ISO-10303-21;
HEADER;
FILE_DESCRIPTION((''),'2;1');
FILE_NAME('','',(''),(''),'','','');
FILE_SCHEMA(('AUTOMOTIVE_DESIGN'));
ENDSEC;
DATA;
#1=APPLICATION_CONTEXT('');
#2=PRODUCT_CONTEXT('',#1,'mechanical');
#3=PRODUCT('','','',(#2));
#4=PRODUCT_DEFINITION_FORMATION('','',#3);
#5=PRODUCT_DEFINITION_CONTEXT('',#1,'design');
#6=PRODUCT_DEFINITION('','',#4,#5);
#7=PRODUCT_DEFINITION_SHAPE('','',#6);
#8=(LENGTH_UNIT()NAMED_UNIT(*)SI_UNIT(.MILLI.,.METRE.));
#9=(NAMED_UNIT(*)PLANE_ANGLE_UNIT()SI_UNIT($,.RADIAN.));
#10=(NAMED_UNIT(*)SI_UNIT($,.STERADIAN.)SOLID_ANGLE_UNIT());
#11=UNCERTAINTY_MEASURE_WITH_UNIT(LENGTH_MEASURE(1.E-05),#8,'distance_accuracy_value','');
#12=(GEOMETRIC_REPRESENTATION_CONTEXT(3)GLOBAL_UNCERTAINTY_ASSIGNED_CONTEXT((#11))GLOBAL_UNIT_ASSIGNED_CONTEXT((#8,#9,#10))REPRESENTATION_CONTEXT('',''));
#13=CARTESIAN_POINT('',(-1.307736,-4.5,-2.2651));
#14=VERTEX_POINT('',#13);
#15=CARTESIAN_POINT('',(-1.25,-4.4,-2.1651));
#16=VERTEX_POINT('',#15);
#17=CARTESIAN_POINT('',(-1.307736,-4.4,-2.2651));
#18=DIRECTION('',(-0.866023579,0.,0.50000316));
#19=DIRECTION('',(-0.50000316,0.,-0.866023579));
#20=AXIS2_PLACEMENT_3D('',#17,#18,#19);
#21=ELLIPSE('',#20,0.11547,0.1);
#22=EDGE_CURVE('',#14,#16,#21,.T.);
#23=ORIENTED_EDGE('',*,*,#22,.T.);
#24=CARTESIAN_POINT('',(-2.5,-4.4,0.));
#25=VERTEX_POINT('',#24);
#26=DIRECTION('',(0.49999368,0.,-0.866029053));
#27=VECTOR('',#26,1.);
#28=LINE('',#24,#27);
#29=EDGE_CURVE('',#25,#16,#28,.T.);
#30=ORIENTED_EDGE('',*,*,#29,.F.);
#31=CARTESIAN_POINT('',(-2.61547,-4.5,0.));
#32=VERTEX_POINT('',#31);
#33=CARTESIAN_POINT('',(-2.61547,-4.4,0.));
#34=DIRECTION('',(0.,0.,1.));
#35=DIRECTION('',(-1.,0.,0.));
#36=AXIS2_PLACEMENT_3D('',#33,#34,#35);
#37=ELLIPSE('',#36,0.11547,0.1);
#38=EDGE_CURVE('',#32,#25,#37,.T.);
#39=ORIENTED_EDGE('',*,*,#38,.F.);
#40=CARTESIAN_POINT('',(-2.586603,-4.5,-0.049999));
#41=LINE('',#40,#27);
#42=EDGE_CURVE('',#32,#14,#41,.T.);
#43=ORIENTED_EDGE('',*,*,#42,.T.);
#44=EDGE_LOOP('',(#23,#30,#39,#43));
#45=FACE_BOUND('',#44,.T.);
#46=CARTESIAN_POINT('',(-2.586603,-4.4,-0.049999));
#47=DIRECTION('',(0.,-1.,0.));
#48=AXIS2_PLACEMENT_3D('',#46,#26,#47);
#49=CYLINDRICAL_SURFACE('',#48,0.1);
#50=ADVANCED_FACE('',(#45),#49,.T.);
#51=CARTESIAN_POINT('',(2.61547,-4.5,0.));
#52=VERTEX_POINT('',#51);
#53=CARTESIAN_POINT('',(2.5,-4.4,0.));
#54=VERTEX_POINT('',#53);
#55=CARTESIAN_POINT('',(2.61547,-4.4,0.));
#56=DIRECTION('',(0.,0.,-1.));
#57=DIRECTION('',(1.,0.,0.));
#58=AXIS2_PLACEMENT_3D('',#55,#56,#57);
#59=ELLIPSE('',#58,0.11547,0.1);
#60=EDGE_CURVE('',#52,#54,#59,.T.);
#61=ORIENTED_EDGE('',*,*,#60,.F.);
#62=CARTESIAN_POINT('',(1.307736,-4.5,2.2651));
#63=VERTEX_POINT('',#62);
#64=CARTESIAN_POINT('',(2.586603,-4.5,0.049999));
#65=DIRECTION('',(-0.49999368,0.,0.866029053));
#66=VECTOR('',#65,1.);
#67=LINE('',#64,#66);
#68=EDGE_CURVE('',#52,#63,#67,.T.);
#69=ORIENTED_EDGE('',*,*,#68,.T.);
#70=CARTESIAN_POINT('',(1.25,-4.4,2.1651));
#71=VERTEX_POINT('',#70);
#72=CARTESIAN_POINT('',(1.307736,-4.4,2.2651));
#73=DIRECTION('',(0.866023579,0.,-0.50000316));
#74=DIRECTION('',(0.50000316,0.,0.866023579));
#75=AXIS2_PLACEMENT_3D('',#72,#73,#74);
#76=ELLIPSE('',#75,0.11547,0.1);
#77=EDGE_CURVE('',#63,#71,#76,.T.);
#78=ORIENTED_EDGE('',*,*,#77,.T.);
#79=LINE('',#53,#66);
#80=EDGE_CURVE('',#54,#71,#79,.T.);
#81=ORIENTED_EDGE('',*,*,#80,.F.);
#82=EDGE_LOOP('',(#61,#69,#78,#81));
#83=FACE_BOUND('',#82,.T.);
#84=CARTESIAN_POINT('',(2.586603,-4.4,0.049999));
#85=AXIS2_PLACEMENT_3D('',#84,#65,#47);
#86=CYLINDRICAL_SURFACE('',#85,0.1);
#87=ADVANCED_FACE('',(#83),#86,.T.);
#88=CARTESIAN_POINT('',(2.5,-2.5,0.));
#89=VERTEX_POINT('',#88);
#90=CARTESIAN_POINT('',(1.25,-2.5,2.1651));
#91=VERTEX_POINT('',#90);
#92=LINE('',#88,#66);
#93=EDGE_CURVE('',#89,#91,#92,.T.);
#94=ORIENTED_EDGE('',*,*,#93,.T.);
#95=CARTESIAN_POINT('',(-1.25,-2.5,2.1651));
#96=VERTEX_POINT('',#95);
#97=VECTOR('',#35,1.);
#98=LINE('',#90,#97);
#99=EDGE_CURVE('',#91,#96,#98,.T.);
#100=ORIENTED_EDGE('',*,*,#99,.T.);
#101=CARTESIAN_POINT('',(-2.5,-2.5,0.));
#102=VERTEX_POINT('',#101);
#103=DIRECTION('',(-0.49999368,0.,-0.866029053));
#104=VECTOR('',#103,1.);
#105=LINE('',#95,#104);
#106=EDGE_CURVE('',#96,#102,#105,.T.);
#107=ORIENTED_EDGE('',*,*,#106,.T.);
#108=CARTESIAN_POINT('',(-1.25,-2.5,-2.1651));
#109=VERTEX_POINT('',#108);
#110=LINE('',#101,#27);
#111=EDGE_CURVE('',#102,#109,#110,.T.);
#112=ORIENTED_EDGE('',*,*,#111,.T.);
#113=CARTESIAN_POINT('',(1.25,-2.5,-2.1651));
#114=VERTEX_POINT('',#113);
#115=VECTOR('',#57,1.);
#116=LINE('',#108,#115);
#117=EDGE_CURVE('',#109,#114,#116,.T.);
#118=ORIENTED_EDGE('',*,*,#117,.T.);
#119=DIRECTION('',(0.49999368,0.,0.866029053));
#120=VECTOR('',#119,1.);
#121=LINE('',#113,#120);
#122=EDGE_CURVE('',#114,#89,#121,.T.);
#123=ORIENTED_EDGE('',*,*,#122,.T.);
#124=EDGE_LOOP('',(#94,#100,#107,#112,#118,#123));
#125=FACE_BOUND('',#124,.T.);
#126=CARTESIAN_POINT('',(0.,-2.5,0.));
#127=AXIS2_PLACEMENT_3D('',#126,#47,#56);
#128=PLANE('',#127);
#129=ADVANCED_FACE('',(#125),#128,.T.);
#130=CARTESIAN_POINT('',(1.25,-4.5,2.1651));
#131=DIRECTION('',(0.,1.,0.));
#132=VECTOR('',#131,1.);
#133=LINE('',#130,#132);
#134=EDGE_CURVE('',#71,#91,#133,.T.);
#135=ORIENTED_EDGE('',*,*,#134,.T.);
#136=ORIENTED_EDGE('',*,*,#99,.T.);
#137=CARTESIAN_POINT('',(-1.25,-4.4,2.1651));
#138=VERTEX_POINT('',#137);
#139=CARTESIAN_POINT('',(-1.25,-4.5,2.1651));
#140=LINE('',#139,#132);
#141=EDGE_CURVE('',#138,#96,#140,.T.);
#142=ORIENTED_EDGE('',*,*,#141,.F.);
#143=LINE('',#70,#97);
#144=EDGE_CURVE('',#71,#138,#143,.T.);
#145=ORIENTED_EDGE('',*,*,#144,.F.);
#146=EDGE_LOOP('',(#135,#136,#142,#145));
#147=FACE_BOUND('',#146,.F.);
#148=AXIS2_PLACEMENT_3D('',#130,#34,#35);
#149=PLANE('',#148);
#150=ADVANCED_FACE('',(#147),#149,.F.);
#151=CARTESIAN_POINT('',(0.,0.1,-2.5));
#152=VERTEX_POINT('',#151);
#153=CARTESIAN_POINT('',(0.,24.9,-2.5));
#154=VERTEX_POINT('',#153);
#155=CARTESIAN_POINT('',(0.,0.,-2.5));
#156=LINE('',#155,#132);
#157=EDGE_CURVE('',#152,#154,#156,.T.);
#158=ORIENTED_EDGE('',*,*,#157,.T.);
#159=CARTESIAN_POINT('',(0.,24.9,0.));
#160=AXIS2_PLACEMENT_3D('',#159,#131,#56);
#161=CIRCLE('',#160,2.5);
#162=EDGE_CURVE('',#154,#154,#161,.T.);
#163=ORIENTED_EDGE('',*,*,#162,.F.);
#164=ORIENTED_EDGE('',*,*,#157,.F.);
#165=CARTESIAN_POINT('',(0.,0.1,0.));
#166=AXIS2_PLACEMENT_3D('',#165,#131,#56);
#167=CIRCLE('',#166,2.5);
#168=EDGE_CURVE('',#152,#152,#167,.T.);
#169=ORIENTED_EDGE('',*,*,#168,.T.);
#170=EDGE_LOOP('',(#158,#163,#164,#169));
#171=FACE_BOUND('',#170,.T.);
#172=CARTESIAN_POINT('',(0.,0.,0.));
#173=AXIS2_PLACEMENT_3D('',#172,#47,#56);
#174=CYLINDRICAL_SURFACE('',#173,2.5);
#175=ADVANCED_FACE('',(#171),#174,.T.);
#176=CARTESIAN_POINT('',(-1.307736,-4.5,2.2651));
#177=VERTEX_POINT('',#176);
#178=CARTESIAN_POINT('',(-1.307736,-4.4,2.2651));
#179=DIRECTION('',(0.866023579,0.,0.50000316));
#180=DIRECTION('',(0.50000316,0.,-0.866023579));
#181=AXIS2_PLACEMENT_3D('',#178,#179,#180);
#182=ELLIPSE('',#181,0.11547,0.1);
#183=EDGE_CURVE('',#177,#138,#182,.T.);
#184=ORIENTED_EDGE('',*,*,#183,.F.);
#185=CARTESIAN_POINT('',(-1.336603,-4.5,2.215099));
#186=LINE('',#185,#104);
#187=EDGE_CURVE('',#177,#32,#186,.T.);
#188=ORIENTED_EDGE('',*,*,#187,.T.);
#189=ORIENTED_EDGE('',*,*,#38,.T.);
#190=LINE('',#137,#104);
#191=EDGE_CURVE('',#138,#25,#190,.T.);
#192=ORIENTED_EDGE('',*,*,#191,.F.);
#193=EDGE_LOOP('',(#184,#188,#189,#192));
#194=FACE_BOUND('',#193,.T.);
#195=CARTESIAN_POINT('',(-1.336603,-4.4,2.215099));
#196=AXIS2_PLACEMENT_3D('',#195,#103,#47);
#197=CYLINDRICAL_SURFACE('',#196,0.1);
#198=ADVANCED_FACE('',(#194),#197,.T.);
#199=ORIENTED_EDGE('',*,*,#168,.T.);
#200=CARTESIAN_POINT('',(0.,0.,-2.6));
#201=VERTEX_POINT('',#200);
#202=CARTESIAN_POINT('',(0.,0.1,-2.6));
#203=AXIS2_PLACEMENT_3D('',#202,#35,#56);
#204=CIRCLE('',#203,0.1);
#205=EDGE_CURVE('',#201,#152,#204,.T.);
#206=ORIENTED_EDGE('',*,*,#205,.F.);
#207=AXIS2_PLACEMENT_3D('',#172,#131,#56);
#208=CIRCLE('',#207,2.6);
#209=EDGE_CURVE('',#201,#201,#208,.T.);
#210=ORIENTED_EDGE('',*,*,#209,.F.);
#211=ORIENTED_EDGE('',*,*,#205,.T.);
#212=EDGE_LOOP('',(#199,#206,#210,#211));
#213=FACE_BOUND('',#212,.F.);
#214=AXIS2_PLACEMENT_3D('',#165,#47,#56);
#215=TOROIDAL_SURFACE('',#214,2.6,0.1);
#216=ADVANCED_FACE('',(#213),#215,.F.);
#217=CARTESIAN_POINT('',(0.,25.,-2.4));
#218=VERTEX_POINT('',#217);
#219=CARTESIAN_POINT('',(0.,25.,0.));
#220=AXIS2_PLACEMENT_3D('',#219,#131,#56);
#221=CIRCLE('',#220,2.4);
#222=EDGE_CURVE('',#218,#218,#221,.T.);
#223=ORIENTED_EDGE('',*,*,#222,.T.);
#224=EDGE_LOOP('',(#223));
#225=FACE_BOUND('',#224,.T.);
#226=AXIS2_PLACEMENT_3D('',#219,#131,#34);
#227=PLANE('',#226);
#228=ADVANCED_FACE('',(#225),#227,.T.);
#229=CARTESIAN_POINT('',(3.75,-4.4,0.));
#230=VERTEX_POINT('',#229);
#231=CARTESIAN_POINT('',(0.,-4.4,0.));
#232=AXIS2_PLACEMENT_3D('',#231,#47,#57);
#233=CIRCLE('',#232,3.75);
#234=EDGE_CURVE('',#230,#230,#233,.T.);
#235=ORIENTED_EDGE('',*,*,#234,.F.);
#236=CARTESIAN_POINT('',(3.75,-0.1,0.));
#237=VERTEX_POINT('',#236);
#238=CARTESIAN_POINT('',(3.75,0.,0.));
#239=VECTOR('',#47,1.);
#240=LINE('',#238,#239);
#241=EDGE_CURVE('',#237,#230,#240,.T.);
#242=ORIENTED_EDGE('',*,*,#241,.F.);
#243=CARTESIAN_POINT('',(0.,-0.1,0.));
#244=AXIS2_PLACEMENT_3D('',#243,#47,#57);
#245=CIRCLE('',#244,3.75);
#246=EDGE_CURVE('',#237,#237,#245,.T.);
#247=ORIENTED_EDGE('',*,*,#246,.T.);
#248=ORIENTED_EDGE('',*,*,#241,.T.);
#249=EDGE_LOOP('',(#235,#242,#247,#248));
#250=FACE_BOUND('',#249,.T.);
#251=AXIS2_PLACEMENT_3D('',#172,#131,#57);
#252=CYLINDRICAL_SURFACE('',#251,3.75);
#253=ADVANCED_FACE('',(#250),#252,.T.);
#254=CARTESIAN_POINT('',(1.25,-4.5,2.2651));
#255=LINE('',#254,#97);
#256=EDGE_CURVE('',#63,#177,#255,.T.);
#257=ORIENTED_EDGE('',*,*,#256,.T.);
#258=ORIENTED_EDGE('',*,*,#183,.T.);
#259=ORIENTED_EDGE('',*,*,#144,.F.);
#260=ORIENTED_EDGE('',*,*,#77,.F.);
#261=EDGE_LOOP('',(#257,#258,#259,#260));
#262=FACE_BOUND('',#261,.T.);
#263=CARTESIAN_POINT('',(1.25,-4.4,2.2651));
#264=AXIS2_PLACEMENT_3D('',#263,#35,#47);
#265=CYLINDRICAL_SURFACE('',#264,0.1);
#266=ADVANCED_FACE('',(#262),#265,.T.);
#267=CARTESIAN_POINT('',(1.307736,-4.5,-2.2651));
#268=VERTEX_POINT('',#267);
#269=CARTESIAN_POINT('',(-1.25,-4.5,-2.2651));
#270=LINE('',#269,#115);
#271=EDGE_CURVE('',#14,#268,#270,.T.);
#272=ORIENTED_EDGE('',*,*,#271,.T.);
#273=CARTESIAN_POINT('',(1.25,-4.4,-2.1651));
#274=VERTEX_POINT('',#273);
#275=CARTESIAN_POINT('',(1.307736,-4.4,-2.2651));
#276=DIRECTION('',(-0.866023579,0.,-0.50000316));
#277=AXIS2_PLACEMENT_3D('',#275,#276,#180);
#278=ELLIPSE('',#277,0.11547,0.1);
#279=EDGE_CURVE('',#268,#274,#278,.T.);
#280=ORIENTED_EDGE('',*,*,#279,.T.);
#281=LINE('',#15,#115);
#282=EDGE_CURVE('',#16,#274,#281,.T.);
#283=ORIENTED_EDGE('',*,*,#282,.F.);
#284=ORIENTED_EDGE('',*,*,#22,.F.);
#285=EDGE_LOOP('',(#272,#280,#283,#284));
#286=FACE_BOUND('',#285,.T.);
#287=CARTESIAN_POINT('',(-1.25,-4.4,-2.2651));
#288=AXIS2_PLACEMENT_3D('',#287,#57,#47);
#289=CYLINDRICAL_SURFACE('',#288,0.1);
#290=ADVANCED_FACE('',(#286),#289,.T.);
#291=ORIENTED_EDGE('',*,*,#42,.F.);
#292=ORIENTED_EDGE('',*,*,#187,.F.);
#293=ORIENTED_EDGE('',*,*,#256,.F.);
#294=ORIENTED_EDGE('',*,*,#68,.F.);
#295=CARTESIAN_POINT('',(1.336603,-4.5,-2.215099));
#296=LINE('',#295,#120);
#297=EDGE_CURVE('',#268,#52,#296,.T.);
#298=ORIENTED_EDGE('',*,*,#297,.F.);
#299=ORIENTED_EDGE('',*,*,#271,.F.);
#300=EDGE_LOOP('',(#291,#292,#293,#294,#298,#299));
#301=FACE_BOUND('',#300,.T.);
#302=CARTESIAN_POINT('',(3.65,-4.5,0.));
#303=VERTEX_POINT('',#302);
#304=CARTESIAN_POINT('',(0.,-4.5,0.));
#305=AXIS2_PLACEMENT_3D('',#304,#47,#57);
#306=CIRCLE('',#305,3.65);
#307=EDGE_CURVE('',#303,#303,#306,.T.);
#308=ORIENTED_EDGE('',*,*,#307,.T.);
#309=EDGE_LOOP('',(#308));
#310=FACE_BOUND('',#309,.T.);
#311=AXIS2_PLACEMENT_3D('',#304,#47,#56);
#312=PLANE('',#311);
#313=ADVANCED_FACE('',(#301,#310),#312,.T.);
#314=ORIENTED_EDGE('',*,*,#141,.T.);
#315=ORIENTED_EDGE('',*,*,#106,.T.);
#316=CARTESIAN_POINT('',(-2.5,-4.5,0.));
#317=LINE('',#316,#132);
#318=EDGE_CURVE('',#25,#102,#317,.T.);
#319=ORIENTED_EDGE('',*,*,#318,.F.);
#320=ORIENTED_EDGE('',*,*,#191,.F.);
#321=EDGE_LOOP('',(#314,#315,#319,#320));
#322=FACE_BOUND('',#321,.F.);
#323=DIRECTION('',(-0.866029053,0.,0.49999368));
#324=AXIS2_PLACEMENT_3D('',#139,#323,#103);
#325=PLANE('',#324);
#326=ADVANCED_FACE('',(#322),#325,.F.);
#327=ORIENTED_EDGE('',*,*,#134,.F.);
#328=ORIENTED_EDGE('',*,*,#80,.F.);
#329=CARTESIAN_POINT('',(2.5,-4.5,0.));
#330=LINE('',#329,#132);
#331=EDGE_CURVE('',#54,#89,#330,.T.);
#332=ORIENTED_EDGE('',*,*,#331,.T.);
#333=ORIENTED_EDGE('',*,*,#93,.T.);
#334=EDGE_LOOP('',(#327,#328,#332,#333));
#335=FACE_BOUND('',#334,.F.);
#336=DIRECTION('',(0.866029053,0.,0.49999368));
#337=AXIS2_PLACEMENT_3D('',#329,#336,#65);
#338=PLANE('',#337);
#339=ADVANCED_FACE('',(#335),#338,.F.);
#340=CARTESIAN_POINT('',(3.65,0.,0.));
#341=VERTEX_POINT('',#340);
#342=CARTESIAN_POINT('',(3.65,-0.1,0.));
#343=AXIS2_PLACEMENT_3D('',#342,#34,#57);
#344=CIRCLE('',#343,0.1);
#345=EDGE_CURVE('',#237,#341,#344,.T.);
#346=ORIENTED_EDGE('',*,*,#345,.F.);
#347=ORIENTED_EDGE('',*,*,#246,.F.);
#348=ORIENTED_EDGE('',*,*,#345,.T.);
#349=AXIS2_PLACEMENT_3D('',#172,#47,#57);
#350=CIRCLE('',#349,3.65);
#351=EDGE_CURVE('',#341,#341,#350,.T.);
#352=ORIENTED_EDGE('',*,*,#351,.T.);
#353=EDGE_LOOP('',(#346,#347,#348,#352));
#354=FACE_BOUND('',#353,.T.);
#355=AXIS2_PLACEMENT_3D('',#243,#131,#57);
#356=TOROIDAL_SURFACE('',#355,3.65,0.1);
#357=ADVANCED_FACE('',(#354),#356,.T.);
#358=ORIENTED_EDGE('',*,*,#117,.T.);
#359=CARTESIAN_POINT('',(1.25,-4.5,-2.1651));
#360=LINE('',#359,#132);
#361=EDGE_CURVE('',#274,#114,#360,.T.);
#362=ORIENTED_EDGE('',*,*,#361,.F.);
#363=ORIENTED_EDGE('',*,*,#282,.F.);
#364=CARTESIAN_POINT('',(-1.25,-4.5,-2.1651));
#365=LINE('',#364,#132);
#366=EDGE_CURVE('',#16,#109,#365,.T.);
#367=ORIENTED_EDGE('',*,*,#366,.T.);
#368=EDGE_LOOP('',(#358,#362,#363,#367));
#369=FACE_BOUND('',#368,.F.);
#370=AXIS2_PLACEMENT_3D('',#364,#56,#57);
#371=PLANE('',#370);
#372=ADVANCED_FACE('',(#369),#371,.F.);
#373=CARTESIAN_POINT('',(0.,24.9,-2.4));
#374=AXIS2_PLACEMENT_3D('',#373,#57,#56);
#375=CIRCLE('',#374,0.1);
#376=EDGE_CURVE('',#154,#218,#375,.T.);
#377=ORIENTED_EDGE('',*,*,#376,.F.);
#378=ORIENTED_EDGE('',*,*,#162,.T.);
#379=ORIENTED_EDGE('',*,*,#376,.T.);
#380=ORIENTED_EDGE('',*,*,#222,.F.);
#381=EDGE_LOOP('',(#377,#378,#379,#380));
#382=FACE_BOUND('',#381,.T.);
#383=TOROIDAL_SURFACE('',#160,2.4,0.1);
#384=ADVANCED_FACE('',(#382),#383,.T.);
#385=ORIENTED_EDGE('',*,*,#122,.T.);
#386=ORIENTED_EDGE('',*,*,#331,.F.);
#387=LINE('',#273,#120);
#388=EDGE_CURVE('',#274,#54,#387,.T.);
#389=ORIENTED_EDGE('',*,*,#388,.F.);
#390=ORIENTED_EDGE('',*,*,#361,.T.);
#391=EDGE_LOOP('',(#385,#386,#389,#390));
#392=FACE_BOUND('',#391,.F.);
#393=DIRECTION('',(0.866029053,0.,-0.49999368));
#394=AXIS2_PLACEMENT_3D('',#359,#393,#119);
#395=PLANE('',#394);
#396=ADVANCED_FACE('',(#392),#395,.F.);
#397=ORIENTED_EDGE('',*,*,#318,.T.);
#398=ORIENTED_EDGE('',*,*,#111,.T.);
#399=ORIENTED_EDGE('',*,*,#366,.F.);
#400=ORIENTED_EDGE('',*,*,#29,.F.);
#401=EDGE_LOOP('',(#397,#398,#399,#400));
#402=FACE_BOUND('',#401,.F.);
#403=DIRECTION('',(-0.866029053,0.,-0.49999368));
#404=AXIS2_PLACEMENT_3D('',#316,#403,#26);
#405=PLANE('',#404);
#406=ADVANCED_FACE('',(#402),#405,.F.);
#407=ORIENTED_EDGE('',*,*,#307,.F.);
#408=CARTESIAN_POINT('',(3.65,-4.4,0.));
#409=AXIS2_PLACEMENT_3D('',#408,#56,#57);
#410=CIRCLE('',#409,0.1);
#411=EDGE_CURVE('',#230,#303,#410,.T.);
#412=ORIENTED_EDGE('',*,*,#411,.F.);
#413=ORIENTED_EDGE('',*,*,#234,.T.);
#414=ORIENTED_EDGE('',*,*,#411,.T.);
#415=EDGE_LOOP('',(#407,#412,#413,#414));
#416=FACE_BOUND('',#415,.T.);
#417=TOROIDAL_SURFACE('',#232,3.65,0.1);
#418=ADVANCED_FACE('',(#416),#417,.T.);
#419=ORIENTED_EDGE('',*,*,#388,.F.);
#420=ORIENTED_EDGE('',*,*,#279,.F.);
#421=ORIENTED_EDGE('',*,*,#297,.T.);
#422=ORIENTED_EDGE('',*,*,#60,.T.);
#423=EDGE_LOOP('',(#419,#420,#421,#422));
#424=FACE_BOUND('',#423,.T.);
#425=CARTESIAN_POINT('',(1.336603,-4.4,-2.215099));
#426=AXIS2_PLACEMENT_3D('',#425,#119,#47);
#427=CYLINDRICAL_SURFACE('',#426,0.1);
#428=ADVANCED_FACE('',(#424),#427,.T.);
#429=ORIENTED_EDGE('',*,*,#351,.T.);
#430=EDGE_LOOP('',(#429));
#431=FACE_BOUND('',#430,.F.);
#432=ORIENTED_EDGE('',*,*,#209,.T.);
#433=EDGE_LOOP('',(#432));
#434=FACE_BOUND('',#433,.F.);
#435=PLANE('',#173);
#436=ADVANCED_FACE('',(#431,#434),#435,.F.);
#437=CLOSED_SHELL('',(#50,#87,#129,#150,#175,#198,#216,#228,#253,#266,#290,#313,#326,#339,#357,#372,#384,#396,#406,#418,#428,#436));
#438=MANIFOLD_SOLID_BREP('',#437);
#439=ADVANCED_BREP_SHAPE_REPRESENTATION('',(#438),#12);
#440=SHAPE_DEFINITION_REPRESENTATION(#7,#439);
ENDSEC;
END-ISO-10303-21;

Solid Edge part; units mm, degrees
sketch "Sketch1" plane through (0, 0, 0) normal (0, -1, 0) x (1, 0, 0)
  circle A0 centre (0, 0) radius 3.75
extrude "Protrusion1" add sketch "Sketch1" along normal blind 4.5
sketch "Sketch2" plane through (0, 0, 0) normal (0, 1, 0) x (0, 0, -1)
  circle A0 centre (0, 0) radius 2.5
extrude "ExtrudedProtrusion_2" add sketch "Sketch2" along normal blind 25
sketch "Sketch3" plane through (0, -4.5, 0) normal (0, -1, 0) x (0, 0, 1)
  line L0 (-2.1651, 1.25) -> (-2.1651, -1.25)
  line L1 (-2.1651, -1.25) -> (0, -2.5)
  line L2 (0, -2.5) -> (2.1651, -1.25)
  line L3 (2.1651, -1.25) -> (2.1651, 1.25)
  line L4 (2.1651, 1.25) -> (0, 2.5)
  line L5 (0, 2.5) -> (-2.1651, 1.25)
extrude "ExtrudedCutout_1" cut sketch "Sketch3" against normal blind 2
fillet "Round_1" radius 0.1 10 edges at (-1.875, -4.5, 1.0825) (-1.875, -4.5, -1.0825) (0, -4.5, -2.1651) (1.875, -4.5, -1.0825) (1.875, -4.5, 1.0825) (0, -4.5, 2.1651) (-3.75, -4.5, 0) (-3.75, 0, 0) (0, 0, 2.5) (0, 25, 2.5)
